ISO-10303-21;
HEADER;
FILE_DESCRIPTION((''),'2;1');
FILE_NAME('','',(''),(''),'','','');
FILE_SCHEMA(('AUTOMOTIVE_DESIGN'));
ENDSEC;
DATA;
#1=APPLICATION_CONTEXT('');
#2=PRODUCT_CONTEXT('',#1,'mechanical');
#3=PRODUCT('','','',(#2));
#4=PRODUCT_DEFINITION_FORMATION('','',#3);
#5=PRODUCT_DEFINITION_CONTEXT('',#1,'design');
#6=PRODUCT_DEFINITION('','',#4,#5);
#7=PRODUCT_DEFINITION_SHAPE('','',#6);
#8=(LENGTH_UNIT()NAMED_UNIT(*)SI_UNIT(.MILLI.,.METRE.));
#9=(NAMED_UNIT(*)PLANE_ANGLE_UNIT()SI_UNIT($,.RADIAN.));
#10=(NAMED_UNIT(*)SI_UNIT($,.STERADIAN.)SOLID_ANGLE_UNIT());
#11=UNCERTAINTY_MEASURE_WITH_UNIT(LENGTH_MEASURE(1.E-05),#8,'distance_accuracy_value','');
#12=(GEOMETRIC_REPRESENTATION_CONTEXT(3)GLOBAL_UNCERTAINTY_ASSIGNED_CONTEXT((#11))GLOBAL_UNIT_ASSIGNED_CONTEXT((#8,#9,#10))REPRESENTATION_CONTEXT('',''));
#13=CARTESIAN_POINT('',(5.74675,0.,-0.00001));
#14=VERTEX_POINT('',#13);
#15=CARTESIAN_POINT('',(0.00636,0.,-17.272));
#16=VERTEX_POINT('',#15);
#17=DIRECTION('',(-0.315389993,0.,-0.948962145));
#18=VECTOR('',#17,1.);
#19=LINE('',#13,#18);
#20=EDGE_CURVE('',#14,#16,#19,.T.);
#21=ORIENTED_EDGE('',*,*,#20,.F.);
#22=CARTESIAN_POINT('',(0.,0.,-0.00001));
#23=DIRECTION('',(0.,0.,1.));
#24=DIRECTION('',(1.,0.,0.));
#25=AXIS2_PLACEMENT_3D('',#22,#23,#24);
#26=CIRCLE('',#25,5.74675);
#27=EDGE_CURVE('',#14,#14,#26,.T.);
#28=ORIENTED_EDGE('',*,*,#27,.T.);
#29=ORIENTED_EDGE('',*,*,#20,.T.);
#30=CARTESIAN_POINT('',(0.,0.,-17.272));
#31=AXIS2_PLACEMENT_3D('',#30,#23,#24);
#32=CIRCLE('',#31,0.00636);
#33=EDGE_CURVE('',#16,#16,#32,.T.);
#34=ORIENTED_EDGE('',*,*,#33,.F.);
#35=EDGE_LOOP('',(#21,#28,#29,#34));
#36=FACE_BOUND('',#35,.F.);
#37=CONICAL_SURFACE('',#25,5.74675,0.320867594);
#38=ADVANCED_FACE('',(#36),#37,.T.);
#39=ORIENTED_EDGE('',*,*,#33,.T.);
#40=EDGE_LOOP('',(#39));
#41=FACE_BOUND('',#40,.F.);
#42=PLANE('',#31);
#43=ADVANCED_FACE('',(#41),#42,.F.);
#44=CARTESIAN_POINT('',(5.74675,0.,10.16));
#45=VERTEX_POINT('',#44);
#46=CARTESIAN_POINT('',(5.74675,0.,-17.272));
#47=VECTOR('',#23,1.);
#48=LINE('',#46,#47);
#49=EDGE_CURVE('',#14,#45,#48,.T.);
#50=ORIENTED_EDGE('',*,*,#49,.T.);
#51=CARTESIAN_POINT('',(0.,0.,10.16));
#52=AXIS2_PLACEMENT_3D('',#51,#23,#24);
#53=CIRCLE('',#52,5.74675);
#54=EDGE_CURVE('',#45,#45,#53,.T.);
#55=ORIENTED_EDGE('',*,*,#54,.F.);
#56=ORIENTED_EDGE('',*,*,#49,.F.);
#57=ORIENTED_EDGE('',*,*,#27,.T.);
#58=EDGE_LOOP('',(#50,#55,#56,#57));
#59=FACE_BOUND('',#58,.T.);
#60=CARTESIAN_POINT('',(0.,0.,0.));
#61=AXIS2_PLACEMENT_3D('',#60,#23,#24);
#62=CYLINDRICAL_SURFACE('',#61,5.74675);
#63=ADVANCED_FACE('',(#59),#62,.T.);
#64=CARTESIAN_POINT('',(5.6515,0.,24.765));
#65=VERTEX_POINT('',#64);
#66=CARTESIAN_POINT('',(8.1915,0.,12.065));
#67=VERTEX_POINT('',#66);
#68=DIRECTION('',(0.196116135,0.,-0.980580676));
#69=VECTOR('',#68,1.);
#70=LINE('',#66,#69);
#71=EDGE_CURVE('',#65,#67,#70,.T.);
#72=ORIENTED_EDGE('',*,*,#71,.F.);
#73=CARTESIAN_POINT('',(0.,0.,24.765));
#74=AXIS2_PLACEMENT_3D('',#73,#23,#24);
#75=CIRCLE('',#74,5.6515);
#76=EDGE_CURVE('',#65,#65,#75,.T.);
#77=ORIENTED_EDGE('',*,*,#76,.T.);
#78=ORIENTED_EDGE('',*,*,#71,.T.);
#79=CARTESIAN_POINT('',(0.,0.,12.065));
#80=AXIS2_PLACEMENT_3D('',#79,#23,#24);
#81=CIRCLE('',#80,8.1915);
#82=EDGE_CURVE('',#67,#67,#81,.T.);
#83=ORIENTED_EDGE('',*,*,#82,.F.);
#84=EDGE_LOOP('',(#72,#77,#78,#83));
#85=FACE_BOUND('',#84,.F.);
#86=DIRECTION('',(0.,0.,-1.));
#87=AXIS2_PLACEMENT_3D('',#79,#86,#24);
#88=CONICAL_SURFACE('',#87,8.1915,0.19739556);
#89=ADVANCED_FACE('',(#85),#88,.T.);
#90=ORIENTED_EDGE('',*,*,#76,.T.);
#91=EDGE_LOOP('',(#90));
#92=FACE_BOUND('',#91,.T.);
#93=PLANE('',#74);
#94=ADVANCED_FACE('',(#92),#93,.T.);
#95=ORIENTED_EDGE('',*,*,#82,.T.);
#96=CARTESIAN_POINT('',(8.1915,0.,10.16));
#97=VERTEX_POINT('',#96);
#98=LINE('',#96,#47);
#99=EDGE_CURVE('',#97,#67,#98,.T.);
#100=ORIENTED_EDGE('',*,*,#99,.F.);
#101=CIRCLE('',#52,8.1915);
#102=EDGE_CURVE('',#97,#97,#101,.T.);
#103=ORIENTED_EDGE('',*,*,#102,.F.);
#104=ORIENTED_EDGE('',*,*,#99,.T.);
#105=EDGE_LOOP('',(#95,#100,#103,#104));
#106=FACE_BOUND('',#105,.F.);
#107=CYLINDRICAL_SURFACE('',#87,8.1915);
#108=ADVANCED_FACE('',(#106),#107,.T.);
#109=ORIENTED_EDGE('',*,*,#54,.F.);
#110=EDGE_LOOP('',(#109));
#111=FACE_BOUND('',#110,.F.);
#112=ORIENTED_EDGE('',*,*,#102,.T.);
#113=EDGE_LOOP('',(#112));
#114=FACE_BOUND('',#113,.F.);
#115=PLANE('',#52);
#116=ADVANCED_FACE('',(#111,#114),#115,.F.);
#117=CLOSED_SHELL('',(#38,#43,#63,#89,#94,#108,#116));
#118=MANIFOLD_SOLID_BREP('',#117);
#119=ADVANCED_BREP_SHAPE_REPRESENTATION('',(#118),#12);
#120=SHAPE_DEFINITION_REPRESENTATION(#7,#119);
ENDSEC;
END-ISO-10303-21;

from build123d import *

# Parameters (mm, degrees)
F0_R     = 5.74675
F1_DEPTH = 10.16
F2_R     = 8.1915
F2_R_2   = 5.74675
F3_DEPTH = 1.905
F4_R     = 8.1915
F5_DEPTH = 12.7
F6_SIZE2 = 12.7
F6_SIZE  = 2.54
F7_DEPTH = 17.272
F8_SIZE2 = 5.74039
F8_SIZE  = 17.27199


# Not quite as in the source:
# - a fillet or chamfer is up to 0.001 mm smaller than in the source, because OpenCascade refuses the exact size


with BuildPart() as f1:
    # F0 (on Top) → F1 (new body)
    with BuildSketch(Plane.XY):
        Circle(F0_R)
    extrude(amount=F1_DEPTH)

    # F2 (on face) → F3 (join)
    with BuildSketch(Plane.XY.offset(10.16)):
        Circle(F2_R)
        Circle(F2_R_2, mode=Mode.SUBTRACT)
        Circle(F2_R_2)
    extrude(amount=F3_DEPTH)

    # F4 (on face) → F5 (join)
    with BuildSketch(Plane.XY.offset(12.065)):
        Circle(F4_R)
    extrude(amount=F5_DEPTH)

    # F6
    f6_edges = [f1.edges().sort_by_distance(p)[0] for p in [
        (-8.1915, 0, 24.765),
    ]]
    f6_side = f1.faces().sort_by_distance((0, 0, 24.765))[0]
    chamfer(f6_edges, length=F6_SIZE, length2=F6_SIZE2, reference=f6_side)

    # F7 (add): a face of the model
    f7_faces = [f1.faces().sort_by_distance(p)[0] for p in [
        (0, 0, 0),
    ]]
    extrude(f7_faces, amount=F7_DEPTH)

    # F8 (size 17.272 and 5.7404 in the source; OpenCascade refuses exactly that, so slightly less here)
    f8_edges = [f1.edges().sort_by_distance(p)[0] for p in [
        (-5.74675, 0, -17.272),
    ]]
    f8_side = f1.faces().sort_by_distance((-5.74675, 0, -8.636))[0]
    chamfer(f8_edges, length=F8_SIZE, length2=F8_SIZE2, reference=f8_side)


solid = f1.part
